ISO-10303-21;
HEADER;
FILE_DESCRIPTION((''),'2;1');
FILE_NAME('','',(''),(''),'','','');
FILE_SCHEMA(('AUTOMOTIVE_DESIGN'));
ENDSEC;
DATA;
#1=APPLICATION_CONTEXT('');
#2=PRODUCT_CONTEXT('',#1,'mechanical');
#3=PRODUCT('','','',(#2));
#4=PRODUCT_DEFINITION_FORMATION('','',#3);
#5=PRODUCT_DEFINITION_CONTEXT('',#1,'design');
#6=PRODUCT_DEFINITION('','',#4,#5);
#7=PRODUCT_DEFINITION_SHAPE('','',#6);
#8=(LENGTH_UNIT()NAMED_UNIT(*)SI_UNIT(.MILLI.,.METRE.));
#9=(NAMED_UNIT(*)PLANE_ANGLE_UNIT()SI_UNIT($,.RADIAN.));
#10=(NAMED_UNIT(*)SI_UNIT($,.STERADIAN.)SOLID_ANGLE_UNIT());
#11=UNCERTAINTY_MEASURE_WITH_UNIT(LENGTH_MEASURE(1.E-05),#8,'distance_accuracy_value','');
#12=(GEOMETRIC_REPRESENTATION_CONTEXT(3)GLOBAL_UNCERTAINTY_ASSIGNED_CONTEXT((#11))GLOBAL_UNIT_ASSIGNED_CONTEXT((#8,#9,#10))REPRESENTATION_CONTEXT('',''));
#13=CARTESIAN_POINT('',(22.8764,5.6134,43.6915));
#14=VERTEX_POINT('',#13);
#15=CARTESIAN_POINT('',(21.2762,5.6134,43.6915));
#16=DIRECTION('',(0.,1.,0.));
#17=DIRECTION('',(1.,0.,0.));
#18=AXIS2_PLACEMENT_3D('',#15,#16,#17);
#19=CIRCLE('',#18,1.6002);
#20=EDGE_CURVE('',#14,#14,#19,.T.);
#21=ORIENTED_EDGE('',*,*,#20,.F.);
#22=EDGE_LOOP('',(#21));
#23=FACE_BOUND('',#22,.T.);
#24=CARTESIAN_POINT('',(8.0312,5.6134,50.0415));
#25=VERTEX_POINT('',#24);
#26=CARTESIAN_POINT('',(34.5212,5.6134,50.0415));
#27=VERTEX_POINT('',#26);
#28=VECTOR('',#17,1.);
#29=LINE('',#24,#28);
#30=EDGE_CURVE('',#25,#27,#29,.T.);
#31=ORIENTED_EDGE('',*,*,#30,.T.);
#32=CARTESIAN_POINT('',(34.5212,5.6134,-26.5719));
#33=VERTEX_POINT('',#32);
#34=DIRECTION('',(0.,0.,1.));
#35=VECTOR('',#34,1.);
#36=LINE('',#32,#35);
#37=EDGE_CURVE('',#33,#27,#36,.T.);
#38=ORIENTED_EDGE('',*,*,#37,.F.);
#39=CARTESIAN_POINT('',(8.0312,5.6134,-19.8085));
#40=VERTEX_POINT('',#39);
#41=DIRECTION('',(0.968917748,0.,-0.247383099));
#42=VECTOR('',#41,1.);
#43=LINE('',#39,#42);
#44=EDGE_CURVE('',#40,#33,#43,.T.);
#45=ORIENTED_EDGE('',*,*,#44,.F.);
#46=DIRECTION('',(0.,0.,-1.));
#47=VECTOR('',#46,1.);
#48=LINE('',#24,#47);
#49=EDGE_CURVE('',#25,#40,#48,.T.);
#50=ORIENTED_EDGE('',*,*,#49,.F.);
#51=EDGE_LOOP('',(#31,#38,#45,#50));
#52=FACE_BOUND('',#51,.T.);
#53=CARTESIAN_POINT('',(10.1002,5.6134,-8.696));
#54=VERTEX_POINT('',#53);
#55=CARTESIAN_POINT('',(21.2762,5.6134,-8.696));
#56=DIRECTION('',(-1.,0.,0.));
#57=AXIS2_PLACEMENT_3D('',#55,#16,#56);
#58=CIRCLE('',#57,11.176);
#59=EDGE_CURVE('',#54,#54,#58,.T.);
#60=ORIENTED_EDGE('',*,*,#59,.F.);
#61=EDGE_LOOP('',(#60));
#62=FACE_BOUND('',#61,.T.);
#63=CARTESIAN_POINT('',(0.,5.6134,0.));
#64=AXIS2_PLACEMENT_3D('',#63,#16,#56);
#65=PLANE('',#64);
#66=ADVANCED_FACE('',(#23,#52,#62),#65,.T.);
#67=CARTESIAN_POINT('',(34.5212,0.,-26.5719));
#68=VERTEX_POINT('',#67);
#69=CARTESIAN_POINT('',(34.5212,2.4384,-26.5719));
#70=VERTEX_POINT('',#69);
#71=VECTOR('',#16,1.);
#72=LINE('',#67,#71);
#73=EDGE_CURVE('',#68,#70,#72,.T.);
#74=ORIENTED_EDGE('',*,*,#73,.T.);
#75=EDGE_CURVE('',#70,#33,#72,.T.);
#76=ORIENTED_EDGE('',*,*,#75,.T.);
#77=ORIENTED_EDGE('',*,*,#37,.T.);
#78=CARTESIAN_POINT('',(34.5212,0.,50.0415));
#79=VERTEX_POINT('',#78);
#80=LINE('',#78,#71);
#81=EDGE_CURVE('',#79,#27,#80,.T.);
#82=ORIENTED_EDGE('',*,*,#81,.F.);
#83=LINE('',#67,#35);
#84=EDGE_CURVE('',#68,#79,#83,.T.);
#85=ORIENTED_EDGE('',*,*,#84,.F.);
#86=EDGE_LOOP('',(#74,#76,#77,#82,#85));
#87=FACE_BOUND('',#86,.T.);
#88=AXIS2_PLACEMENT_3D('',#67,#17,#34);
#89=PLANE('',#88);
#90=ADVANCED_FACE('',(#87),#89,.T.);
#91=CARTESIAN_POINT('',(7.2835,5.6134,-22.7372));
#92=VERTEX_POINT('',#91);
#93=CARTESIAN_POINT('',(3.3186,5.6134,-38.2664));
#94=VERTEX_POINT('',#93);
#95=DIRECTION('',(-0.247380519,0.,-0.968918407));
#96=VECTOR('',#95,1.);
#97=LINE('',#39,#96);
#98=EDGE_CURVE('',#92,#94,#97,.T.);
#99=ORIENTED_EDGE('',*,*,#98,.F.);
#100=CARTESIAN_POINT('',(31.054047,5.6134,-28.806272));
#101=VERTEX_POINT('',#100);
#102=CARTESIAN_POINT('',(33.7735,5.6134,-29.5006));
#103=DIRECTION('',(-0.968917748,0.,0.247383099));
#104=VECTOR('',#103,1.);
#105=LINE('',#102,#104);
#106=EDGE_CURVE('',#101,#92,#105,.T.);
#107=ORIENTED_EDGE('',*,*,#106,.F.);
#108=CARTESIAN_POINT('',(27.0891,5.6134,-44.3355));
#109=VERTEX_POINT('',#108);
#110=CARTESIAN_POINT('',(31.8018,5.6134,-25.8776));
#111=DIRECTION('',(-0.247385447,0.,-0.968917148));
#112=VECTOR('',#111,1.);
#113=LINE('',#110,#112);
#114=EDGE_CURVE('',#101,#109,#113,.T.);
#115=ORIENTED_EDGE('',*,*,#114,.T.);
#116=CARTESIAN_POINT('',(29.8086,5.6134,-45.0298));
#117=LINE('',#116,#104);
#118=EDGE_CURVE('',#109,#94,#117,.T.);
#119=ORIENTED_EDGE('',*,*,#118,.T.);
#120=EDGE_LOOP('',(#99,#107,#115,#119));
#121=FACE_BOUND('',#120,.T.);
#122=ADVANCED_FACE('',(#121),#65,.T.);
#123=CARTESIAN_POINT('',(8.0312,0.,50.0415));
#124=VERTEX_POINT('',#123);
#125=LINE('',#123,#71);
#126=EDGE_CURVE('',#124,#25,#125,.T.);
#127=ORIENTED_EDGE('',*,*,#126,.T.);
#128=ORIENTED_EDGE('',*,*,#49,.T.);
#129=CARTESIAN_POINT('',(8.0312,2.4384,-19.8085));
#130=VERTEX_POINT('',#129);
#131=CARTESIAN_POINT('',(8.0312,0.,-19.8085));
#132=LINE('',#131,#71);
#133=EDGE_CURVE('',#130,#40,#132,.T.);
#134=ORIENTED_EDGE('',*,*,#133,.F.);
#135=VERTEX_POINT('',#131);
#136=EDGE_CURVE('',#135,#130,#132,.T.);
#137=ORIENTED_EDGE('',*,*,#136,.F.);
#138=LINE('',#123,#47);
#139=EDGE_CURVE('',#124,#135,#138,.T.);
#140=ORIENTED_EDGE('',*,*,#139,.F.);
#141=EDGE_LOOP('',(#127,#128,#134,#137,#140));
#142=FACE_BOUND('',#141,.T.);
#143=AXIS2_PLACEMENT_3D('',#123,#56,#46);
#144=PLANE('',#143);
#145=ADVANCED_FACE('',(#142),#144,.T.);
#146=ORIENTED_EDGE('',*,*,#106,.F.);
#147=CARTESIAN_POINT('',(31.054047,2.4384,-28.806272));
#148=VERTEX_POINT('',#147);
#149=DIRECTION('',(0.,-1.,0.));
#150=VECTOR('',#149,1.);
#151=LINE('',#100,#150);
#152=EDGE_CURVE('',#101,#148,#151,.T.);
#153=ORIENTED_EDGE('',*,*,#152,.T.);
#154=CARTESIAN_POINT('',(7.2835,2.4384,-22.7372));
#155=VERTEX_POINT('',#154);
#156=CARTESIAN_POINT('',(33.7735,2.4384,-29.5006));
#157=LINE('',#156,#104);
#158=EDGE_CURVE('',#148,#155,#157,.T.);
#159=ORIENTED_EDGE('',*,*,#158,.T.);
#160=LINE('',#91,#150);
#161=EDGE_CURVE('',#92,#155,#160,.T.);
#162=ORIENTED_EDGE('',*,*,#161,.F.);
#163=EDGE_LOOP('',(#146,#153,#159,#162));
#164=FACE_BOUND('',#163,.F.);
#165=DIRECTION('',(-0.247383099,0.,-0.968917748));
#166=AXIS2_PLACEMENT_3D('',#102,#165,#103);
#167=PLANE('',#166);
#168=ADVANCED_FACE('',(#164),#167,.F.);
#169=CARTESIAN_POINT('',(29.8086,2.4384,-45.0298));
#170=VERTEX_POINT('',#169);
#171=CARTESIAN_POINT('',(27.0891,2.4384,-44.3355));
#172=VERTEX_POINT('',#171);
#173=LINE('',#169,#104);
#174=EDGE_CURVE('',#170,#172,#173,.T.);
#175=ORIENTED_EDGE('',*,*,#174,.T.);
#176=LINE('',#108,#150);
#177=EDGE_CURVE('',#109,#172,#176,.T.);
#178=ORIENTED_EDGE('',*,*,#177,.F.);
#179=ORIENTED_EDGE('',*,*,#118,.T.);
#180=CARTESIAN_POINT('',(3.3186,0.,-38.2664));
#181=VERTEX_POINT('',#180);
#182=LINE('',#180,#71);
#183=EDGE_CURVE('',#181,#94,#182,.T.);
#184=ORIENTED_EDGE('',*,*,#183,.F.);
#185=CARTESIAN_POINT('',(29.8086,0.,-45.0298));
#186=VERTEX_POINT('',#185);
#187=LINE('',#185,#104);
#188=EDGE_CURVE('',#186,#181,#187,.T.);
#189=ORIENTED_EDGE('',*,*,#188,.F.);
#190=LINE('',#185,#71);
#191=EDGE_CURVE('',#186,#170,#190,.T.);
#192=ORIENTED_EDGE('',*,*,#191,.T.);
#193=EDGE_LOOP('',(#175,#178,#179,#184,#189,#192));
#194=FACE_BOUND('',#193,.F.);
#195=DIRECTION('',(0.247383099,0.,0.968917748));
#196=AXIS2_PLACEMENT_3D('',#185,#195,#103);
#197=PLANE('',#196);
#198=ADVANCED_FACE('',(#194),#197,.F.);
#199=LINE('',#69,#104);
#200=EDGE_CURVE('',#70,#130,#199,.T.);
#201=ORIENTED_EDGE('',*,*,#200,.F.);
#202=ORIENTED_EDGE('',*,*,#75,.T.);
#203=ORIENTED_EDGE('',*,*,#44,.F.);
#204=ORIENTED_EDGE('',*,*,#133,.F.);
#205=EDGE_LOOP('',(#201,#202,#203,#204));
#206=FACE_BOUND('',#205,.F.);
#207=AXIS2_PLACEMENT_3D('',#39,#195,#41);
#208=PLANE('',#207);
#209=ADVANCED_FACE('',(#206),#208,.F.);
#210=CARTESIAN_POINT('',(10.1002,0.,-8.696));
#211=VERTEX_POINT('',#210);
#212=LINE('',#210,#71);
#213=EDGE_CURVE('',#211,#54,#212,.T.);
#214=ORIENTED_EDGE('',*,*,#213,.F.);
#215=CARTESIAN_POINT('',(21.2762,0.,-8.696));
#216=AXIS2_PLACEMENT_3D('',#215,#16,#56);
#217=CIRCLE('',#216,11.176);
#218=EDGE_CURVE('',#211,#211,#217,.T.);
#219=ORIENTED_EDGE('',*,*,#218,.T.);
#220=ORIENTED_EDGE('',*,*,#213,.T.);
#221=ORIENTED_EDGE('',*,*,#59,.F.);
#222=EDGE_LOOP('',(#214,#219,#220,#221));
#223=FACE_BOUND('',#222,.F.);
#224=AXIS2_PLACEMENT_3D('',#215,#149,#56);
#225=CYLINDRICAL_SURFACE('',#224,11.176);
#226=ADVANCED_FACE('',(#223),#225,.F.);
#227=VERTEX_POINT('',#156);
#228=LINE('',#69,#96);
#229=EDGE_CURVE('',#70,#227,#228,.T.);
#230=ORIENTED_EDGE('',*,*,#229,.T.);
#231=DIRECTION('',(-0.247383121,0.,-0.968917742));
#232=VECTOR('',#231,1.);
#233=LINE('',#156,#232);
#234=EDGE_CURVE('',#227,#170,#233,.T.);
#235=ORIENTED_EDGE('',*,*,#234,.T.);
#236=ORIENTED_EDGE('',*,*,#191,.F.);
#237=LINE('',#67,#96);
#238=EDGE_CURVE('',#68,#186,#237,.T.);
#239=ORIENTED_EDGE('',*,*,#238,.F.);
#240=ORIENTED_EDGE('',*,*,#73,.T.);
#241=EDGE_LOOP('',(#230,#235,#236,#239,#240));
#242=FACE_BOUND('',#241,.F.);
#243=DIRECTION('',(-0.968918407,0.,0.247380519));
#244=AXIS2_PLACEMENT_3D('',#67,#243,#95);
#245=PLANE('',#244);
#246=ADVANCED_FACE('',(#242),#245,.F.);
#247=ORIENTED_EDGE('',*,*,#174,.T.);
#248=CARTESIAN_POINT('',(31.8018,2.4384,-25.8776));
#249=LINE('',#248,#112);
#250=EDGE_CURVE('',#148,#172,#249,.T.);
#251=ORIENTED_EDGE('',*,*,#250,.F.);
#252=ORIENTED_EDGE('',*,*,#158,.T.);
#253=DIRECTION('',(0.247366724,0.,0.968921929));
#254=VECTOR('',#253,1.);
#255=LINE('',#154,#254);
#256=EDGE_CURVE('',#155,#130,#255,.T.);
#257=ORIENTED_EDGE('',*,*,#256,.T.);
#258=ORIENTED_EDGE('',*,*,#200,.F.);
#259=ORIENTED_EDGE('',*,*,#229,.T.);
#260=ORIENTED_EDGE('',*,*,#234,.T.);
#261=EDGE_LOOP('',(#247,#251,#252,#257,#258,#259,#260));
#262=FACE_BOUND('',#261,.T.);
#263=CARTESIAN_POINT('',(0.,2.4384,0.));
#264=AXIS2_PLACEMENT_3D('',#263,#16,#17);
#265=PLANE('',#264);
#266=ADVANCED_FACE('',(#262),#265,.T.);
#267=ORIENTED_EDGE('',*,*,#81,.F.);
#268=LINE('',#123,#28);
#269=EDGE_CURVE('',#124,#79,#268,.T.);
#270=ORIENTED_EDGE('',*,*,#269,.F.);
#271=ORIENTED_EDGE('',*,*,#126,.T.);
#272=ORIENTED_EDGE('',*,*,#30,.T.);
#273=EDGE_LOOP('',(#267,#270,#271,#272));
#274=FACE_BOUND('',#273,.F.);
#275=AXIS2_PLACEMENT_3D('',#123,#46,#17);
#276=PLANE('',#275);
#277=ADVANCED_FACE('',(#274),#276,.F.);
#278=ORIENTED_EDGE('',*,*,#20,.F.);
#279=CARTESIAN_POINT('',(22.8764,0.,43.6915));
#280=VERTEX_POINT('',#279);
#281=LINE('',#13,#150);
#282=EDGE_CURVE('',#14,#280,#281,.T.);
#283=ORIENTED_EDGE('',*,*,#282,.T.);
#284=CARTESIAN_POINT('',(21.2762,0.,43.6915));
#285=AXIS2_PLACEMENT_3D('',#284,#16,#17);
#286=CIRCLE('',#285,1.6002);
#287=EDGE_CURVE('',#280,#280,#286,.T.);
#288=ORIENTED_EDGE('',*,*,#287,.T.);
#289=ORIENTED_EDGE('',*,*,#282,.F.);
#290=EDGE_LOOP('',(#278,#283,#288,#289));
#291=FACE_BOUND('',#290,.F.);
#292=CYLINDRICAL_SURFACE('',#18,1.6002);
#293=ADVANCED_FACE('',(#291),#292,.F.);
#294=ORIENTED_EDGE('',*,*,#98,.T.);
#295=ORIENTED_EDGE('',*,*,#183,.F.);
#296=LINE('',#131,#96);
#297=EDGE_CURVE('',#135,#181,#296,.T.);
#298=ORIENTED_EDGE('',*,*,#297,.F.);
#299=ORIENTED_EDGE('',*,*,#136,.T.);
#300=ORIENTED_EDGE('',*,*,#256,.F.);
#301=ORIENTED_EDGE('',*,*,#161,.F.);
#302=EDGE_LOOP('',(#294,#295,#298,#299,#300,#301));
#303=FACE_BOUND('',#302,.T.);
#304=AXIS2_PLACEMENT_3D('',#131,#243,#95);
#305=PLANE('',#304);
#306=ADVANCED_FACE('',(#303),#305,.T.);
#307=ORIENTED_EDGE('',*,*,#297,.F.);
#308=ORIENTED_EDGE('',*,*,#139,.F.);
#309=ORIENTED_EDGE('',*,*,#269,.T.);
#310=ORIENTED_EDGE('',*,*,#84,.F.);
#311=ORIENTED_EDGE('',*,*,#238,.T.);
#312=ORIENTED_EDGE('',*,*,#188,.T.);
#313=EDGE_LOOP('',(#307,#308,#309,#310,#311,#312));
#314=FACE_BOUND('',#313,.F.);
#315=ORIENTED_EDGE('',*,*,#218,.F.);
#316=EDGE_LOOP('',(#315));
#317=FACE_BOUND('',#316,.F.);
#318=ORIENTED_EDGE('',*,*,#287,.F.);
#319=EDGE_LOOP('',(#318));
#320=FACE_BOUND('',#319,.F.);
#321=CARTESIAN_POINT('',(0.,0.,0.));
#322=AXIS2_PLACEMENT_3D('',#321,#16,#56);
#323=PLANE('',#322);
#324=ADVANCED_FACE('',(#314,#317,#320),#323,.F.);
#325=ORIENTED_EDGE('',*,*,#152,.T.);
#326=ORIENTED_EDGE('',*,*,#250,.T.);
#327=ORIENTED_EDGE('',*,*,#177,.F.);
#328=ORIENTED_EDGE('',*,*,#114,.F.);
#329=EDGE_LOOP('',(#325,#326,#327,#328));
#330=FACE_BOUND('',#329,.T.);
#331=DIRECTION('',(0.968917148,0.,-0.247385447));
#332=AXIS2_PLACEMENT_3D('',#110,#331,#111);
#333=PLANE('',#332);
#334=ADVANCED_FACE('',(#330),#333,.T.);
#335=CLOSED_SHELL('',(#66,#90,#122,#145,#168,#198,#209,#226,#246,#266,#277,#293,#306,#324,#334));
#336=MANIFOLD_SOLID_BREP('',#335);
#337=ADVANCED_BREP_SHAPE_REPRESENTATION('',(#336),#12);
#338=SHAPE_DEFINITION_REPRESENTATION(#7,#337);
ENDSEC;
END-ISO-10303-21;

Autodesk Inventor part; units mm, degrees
ref_plane "YZ Plane" through (0, 0, 0) normal (1, 0, 0) x (0, 1, 0)
ref_plane "XZ Plane" through (0, 0, 0) normal (0, 1, 0) x (-1, 0, 0)
ref_plane "XY Plane" through (0, 0, 0) normal (0, 0, 1) x (1, 0, 0)
sketch "Sketch1" plane through (0, 0, 0) normal (0, 1, 0) x (-1, 0, 0)
  line L0 (18.6455, 5.0782) -> (18.6456, 5.0782)
  line L1 (-34.5212, -26.5719) -> (-29.8086, -45.0298)
  line L2 (-29.8086, -45.0298) -> (-3.3186, -38.2664)
  circle A0 centre (-21.2762, -8.696) radius 11.176
  line L3 (-8.0312, 50.0415) -> (-8.0312, -19.8085)
  line L4 (-8.0312, -19.8085) -> (-3.3186, -38.2664)
  line L5 (-3.3186, -38.2664) -> (-29.8086, -45.0298)
  line L6 (-29.8086, -45.0298) -> (-34.5212, -26.5719)
  line L7 (-34.5212, -26.5719) -> (-34.5212, 50.0415)
  line L8 (-8.0312, 50.0415) -> (-34.5212, 50.0415)
  point P0 (0, 0)
  dimension "d4" = 22.352
  dimension "d24" = 19.05
  dimension "d25" = 69.85
  dimension "d26" = 19.05
  dimension "d28" = 26.49
  dimension "d29" = 13.245
  dimension "d35" = 58.7375
  dimension "d36" = 75.677
extrude "Extrusion1" add sketch "Sketch1" along normal blind 5.6134
sketch "Sketch2" plane through (0, 5.6134, 0) normal (0, 1, 0) x (1, 0, 0)
  line L0 (34.5212, 26.5719) -> (29.8086, 45.0298) projected
  line L1 (8.0312, 19.8085) -> (34.5212, 26.5719)
  line L2 (34.5212, 26.5719) -> (33.7735, 29.5006)
  line L3 (33.7735, 29.5006) -> (7.2835, 22.7372)
  line L4 (7.2835, 22.7372) -> (8.0312, 19.8085)
  point P0 (0, 0)
  point P1 (0, 0)
  dimension "d37" = 3.0226
extrude "Extrusion2" cut sketch "Sketch2" against normal blind 3.175
sketch "Sketch3" plane through (0, 5.6134, 0) normal (0, 1, 0) x (1, 0, 0)
  line L0 (33.7735, 29.5006) -> (29.8086, 45.0298) projected
  line L1 (29.8086, 45.0298) -> (3.3186, 38.2664) projected
  line L2 (29.8086, 45.0298) -> (34.5212, 26.5719) projected
  line L3 (29.8086, 45.0298) -> (34.5212, 26.5719)
  line L4 (34.5212, 26.5719) -> (31.8018, 25.8776)
  line L5 (31.8018, 25.8776) -> (27.0891, 44.3355)
  line L6 (27.0891, 44.3355) -> (29.8086, 45.0298)
  point P0 (0, 0)
  point P1 (27.0891, 44.3355)
  dimension "d38" = 2.8067
extrude "Extrusion3" cut sketch "Sketch3" against normal blind 3.175
sketch "Sketch4" plane through (0, 5.6134, 0) normal (0, 1, 0) x (1, 0, 0)
  line L0 (8.0312, -50.0415) -> (34.5212, -50.0415) projected
  line L1 (34.5212, -50.0415) -> (34.5212, 26.5719) projected
  circle A0 centre (21.2762, -43.6915) radius 1.6002
  point P0 (0, 0)
  dimension "d30" = 3.2004
  dimension "d31" = 13.245
  dimension "d32" = 6.35
extrude "Extrusion4" cut sketch "Sketch4" against normal blind 25.4
properties part number "Lidar Sensor Case Piece 2"
